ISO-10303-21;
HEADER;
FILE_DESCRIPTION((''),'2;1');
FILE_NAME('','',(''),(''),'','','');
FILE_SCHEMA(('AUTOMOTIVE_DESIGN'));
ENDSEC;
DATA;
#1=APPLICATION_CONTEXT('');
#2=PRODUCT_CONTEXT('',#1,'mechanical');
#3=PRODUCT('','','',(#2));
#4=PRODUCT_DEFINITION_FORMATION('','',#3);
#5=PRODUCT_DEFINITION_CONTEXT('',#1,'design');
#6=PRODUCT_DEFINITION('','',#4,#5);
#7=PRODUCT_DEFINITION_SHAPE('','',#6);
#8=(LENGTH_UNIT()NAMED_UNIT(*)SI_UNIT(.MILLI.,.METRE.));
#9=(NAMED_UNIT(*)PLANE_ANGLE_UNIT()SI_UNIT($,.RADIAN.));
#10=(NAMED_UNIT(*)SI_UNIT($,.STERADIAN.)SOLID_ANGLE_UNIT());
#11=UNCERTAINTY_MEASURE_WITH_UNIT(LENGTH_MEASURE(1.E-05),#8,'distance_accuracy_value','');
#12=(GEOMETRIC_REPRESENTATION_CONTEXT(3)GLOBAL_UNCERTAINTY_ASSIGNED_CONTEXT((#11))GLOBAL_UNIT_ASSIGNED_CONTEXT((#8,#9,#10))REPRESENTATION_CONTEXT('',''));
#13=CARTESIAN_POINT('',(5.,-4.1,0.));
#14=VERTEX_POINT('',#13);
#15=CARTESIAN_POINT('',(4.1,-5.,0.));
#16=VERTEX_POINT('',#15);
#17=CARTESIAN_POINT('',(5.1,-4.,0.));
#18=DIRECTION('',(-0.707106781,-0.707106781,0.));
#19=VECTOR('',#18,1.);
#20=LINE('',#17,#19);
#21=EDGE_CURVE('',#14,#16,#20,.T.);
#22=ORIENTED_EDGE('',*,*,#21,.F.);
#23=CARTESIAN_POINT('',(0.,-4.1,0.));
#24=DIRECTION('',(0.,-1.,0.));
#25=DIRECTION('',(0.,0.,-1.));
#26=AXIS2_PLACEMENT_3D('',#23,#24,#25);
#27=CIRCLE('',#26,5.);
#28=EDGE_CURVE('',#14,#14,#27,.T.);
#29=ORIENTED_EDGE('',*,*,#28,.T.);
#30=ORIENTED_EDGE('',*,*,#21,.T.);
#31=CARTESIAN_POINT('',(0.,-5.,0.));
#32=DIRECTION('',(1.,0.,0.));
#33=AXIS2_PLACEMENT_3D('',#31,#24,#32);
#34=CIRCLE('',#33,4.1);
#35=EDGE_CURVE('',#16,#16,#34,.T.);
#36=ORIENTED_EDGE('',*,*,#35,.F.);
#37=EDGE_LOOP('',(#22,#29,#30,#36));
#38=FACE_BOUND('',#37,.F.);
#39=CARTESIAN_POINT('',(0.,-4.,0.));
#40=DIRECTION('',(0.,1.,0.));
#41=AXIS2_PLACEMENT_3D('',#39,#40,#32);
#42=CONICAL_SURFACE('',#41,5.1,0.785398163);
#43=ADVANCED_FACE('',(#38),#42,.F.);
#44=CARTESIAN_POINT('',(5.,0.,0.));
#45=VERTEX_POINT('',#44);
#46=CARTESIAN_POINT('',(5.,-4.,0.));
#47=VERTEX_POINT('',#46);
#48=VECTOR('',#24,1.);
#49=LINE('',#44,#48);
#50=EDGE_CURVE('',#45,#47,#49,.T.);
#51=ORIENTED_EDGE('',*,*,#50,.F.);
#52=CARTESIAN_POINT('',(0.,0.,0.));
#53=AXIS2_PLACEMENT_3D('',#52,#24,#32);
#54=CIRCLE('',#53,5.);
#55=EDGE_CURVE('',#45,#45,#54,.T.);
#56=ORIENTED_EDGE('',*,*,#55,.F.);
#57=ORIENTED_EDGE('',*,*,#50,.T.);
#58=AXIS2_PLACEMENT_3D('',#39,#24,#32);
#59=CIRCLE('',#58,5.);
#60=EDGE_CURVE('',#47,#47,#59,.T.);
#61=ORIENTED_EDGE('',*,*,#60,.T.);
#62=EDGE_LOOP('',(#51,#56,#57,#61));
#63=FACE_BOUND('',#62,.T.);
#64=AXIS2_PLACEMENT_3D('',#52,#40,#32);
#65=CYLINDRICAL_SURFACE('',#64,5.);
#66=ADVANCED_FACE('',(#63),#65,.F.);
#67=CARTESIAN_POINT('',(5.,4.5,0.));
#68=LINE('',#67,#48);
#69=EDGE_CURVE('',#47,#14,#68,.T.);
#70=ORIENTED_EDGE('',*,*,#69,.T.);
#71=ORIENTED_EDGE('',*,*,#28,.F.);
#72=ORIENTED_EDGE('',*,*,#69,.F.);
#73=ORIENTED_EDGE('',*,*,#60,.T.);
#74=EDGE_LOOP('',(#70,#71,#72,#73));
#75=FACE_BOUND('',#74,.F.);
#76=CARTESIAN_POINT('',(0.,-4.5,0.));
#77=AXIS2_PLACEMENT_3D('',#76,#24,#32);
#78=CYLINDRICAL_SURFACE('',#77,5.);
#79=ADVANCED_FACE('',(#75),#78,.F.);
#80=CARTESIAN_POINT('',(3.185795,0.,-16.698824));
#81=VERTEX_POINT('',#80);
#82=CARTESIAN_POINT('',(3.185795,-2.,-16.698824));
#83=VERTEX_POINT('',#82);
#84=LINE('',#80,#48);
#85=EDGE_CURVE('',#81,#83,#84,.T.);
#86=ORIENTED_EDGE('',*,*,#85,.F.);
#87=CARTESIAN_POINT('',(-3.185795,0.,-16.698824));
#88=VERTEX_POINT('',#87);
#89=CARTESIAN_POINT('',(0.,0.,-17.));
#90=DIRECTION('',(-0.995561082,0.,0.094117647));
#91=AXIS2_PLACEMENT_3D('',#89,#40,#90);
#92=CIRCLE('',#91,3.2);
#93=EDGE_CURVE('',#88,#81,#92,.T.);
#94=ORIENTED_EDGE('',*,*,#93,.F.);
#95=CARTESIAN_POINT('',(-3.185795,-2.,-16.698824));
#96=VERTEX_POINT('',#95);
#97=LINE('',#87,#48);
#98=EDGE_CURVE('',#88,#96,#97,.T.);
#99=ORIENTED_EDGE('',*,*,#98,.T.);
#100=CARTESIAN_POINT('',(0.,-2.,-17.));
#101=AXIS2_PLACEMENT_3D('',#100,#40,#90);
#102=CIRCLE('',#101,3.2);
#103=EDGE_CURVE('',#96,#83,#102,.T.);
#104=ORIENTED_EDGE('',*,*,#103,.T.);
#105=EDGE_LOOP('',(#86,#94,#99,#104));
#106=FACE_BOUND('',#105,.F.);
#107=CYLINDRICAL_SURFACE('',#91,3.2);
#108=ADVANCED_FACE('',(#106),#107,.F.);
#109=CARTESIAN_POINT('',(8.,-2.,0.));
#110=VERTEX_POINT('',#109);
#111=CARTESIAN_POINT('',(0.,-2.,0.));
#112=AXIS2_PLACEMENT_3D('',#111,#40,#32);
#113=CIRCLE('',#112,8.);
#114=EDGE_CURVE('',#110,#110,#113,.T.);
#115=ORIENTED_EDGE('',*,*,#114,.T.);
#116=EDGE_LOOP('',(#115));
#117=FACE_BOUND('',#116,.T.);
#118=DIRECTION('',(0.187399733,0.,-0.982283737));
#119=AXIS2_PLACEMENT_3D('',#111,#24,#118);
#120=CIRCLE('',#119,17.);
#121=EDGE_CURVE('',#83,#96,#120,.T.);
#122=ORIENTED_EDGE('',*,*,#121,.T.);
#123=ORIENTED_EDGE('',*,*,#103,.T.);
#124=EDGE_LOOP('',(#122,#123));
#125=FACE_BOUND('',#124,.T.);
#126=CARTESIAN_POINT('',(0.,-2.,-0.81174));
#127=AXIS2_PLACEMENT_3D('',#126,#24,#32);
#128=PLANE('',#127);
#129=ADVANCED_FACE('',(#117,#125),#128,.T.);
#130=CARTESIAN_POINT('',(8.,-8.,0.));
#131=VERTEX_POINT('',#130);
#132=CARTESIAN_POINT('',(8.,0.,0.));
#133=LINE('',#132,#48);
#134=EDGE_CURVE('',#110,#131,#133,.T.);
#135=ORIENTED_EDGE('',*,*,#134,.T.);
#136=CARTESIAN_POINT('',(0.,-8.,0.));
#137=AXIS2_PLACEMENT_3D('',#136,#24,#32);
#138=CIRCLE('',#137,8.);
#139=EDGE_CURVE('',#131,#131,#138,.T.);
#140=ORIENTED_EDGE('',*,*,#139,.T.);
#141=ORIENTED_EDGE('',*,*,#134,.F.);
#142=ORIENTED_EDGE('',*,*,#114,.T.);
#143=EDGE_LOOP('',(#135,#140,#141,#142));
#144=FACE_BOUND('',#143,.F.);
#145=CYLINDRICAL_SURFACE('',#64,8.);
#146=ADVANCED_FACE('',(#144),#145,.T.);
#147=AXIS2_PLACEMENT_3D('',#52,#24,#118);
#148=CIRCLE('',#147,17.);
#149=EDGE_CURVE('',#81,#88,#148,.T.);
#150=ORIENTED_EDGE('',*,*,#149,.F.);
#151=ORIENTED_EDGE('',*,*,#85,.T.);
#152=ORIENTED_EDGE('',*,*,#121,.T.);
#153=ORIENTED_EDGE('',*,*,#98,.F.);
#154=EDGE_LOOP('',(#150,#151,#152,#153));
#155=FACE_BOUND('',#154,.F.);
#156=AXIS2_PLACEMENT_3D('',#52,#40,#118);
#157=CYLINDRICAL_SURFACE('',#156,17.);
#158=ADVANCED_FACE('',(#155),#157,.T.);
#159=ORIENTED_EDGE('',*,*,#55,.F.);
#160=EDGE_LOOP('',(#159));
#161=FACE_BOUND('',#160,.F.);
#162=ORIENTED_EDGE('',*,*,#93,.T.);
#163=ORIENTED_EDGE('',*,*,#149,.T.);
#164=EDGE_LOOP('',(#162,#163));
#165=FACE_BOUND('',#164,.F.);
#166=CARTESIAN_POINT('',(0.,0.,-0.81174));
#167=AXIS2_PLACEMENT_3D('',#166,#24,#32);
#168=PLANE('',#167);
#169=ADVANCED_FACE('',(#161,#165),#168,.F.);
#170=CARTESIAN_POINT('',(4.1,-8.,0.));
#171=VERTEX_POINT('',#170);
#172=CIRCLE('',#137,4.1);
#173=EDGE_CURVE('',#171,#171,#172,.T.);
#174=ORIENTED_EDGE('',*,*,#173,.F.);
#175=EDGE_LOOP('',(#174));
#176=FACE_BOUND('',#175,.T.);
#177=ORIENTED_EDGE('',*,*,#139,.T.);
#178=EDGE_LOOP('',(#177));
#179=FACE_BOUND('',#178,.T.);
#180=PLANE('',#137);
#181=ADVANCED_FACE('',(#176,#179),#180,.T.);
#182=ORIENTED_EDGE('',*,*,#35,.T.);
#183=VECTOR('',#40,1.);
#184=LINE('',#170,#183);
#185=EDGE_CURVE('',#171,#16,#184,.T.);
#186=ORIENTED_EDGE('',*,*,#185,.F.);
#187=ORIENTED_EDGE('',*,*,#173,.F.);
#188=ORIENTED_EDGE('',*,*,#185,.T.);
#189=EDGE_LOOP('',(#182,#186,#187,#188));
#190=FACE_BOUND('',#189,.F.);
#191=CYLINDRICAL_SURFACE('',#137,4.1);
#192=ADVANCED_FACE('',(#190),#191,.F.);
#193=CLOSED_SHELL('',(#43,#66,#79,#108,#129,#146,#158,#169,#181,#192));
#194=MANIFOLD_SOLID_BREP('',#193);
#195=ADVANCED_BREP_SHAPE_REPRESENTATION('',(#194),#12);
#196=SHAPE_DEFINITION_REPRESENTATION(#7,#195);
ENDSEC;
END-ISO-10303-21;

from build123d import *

# Parameters (mm, degrees)
F0_R        = 5
F1_DEPTH    = 2
F2_R        = 8
F2_R_2      = 5
F3_DEPTH    = 8
F4_R        = 5
F4_R_2      = 4.1
F5_DEPTH    = 4
F6_S5_R     = 5
F6_T6_DEPTH = 9


# Not quite as in the source:
# - a fillet or chamfer that OpenCascade refuses, or shapes differently, is made with other operations: its cross-section is extruded or revolved along the edge and cut away or added


with BuildPart() as f1:
    # F0 (on Front) → F1 (new body)
    with BuildSketch(Plane.XZ):
        with BuildLine():
            ThreePointArc((-3.1857954632, -16.6988235294), (0, -13.8), (3.1857954632, -16.6988235294))
            ThreePointArc((3.1857954632, -16.6988235294), (0, 17), (-3.1857954632, -16.6988235294))
        make_face()
        Circle(F0_R, mode=Mode.SUBTRACT)
    extrude(amount=F1_DEPTH)

    # F2 (on Front) → F3 (join)
    with BuildSketch(Plane.XZ):
        Circle(F2_R)
        Circle(F2_R_2, mode=Mode.SUBTRACT)
    extrude(amount=F3_DEPTH)

    # F4 (on face) → F5 (join)
    with BuildSketch(Plane.XZ.offset(8)):
        Circle(F4_R)
        Circle(F4_R_2, mode=Mode.SUBTRACT)
    extrude(amount=-F5_DEPTH)

    # F6: chamfer of 1 on 1 edges, made by hand


with BuildPart() as f6_tool2:
    # F6_s3 → F6_t4 (revolve)
    with BuildSketch(Plane.XY):
        Polygon((5.1, -4), (4.1, -5), (4.1, -4), align=None)
    revolve(axis=Axis((0, -4, 0), (0, -1, 0)))

    # F6_s5 → F6_t6 (intersect, symmetric)
    with BuildSketch(Plane.XZ.offset(4.5)):
        Circle(F6_S5_R)
    extrude(amount=F6_T6_DEPTH, both=True, mode=Mode.INTERSECT)


with BuildPart() as f1_1:
    add(f1.part)

    # F6_t1: cut F6_tool2
    add(f6_tool2.part, mode=Mode.SUBTRACT)


solid = f1_1.part
